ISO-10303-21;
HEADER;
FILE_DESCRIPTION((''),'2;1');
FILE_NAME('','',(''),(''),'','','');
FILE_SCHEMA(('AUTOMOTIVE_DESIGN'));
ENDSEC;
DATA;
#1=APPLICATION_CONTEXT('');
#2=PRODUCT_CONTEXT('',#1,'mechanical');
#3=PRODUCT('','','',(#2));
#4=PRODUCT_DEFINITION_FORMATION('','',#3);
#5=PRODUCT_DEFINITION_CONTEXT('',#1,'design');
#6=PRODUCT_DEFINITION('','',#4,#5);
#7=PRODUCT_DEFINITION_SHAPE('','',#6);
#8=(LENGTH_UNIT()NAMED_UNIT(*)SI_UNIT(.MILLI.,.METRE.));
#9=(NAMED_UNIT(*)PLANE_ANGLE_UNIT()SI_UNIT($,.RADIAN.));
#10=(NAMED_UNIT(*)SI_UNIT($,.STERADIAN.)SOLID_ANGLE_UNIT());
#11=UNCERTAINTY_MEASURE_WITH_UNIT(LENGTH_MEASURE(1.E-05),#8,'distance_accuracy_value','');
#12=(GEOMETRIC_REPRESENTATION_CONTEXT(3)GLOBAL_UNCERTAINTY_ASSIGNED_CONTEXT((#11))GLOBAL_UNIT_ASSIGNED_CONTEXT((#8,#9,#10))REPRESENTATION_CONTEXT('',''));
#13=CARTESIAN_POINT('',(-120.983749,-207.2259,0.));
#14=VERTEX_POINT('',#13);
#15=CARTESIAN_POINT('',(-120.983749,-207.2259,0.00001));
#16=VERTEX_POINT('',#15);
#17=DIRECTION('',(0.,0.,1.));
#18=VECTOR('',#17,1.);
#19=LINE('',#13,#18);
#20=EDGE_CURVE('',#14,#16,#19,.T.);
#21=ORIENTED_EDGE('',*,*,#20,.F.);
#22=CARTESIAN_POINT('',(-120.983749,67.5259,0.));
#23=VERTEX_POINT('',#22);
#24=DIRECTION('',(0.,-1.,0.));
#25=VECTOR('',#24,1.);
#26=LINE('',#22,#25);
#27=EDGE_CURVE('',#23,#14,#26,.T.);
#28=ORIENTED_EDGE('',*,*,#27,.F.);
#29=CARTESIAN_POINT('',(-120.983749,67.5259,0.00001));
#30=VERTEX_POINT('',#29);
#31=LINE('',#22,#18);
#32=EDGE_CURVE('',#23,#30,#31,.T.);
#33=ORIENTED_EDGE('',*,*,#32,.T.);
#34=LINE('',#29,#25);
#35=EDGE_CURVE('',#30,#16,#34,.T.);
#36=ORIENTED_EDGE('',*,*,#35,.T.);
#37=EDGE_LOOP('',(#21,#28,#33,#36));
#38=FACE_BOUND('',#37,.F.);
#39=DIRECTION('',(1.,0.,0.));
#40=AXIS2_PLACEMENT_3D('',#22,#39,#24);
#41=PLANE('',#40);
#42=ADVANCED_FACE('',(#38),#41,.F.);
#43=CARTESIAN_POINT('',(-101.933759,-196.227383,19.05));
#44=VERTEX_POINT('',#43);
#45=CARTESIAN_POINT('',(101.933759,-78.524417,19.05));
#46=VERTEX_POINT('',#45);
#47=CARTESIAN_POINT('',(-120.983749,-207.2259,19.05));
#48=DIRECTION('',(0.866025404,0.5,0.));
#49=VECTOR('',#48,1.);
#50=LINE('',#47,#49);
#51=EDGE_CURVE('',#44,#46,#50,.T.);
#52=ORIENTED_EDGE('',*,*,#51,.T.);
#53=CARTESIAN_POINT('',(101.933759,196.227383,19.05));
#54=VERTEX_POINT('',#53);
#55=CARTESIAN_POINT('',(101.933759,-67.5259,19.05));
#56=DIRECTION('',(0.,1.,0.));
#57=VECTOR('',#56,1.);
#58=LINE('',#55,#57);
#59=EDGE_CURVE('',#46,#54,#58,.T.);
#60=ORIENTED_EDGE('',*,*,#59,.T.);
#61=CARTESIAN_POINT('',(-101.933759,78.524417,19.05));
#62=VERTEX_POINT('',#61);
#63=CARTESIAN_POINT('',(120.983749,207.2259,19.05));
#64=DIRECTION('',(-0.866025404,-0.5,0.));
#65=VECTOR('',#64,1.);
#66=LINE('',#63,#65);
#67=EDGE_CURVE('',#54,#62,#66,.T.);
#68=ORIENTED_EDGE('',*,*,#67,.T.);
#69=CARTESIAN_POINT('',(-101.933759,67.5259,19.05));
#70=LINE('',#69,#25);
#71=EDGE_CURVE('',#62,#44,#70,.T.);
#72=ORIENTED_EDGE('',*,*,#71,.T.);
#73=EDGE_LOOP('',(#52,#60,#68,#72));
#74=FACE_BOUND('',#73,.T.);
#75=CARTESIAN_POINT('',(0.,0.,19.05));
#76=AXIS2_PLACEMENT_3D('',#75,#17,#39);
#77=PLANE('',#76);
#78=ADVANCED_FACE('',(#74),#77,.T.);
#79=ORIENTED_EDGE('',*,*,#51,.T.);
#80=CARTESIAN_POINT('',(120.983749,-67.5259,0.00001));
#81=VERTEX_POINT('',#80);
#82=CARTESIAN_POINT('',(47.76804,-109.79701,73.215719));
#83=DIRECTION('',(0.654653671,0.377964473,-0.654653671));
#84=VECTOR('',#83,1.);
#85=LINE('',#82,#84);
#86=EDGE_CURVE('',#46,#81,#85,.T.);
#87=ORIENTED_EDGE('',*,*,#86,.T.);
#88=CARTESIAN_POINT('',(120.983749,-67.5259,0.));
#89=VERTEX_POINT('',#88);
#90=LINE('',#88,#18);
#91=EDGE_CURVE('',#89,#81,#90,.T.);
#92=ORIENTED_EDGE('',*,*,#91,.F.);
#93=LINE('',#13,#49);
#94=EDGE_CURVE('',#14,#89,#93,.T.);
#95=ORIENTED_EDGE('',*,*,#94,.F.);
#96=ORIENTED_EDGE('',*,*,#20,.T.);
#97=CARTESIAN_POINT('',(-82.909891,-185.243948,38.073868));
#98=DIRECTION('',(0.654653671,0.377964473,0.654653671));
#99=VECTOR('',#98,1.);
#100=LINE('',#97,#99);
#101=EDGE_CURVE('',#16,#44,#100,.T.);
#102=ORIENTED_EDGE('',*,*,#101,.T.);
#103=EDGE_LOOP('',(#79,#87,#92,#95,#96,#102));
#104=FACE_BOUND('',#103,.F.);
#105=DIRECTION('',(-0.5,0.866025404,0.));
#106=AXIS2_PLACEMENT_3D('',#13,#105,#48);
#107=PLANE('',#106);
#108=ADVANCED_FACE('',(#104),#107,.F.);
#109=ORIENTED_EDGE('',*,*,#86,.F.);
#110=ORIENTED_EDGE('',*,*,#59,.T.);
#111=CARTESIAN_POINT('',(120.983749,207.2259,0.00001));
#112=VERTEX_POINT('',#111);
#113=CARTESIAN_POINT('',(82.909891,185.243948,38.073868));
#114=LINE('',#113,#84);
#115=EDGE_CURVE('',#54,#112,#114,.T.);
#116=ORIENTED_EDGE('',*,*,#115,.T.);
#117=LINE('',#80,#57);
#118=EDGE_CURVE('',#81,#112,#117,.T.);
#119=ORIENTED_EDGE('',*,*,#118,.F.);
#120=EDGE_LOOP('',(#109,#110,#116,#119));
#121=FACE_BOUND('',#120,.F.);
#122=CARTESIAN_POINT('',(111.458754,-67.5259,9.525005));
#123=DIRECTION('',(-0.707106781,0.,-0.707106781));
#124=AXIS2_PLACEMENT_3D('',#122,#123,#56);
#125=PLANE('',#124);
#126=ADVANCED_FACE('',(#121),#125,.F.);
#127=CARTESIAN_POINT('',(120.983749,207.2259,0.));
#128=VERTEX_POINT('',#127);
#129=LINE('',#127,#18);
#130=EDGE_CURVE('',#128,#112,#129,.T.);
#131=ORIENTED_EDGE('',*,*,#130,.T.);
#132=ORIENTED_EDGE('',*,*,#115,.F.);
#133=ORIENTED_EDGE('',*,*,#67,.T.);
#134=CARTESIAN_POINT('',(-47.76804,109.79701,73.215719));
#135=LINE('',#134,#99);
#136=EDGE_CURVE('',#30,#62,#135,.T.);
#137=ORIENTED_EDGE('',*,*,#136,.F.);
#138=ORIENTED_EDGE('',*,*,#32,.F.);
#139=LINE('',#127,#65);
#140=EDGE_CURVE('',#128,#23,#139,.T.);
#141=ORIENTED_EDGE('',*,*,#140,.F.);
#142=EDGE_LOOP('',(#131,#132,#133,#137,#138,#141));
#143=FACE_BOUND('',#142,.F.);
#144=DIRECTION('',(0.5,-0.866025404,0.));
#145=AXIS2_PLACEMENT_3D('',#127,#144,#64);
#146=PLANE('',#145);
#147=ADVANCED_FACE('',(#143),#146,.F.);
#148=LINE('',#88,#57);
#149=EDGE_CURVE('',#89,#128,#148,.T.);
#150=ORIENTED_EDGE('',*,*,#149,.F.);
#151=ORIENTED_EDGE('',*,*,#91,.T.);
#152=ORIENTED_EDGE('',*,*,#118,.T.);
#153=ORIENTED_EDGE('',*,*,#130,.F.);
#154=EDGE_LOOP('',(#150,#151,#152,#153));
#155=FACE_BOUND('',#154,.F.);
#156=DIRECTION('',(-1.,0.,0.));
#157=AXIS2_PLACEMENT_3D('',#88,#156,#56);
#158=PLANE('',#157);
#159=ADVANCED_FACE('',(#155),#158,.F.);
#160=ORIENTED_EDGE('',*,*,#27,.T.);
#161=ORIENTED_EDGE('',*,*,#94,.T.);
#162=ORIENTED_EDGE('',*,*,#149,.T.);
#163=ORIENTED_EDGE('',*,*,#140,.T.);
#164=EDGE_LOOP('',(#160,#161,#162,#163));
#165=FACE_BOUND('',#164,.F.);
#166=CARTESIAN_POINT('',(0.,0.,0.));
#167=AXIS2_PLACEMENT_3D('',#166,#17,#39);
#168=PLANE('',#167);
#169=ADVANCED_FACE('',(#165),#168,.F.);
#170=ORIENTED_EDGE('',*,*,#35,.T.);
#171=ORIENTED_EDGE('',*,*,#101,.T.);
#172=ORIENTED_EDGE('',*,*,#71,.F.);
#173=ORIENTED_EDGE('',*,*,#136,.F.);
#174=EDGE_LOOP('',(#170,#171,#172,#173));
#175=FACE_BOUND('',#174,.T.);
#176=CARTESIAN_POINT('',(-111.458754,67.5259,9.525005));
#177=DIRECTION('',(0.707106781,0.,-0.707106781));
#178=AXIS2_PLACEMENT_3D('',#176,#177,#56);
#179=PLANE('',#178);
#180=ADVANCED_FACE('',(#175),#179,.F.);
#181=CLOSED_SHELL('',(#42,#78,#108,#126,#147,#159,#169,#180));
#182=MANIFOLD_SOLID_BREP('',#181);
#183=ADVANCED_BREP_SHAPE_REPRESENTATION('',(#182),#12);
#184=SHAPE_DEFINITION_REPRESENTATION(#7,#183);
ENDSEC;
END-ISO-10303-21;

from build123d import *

# Parameters (mm, degrees)
F1_DEPTH = 19.05
F2_SIZE  = 19.04999
F3_SIZE  = 19.04999


# Not quite as in the source:
# - a fillet or chamfer is up to 0.001 mm smaller than in the source, because OpenCascade refuses the exact size


with BuildPart() as f1:
    # F0 (on Top) → F1 (new body)
    with BuildSketch(Plane.XY):
        Polygon((-120.9837489087, -207.2259), (120.9837489087, -67.5259), (120.9837489087, 207.2259), (-120.9837489087, 67.5259), align=None)
    extrude(amount=F1_DEPTH)

    # F2 (size 19.05 in the source; OpenCascade refuses exactly that, so slightly less here)
    f2_edges = [f1.edges().sort_by_distance(p)[0] for p in [
        (-120.983749, -69.85, 19.05),
    ]]
    chamfer(f2_edges, length=F2_SIZE)

    # F3 (size 19.05 in the source; OpenCascade refuses exactly that, so slightly less here)
    f3_edges = [f1.edges().sort_by_distance(p)[0] for p in [
        (120.983749, 69.85, 19.05),
    ]]
    chamfer(f3_edges, length=F3_SIZE)


solid = f1.part
